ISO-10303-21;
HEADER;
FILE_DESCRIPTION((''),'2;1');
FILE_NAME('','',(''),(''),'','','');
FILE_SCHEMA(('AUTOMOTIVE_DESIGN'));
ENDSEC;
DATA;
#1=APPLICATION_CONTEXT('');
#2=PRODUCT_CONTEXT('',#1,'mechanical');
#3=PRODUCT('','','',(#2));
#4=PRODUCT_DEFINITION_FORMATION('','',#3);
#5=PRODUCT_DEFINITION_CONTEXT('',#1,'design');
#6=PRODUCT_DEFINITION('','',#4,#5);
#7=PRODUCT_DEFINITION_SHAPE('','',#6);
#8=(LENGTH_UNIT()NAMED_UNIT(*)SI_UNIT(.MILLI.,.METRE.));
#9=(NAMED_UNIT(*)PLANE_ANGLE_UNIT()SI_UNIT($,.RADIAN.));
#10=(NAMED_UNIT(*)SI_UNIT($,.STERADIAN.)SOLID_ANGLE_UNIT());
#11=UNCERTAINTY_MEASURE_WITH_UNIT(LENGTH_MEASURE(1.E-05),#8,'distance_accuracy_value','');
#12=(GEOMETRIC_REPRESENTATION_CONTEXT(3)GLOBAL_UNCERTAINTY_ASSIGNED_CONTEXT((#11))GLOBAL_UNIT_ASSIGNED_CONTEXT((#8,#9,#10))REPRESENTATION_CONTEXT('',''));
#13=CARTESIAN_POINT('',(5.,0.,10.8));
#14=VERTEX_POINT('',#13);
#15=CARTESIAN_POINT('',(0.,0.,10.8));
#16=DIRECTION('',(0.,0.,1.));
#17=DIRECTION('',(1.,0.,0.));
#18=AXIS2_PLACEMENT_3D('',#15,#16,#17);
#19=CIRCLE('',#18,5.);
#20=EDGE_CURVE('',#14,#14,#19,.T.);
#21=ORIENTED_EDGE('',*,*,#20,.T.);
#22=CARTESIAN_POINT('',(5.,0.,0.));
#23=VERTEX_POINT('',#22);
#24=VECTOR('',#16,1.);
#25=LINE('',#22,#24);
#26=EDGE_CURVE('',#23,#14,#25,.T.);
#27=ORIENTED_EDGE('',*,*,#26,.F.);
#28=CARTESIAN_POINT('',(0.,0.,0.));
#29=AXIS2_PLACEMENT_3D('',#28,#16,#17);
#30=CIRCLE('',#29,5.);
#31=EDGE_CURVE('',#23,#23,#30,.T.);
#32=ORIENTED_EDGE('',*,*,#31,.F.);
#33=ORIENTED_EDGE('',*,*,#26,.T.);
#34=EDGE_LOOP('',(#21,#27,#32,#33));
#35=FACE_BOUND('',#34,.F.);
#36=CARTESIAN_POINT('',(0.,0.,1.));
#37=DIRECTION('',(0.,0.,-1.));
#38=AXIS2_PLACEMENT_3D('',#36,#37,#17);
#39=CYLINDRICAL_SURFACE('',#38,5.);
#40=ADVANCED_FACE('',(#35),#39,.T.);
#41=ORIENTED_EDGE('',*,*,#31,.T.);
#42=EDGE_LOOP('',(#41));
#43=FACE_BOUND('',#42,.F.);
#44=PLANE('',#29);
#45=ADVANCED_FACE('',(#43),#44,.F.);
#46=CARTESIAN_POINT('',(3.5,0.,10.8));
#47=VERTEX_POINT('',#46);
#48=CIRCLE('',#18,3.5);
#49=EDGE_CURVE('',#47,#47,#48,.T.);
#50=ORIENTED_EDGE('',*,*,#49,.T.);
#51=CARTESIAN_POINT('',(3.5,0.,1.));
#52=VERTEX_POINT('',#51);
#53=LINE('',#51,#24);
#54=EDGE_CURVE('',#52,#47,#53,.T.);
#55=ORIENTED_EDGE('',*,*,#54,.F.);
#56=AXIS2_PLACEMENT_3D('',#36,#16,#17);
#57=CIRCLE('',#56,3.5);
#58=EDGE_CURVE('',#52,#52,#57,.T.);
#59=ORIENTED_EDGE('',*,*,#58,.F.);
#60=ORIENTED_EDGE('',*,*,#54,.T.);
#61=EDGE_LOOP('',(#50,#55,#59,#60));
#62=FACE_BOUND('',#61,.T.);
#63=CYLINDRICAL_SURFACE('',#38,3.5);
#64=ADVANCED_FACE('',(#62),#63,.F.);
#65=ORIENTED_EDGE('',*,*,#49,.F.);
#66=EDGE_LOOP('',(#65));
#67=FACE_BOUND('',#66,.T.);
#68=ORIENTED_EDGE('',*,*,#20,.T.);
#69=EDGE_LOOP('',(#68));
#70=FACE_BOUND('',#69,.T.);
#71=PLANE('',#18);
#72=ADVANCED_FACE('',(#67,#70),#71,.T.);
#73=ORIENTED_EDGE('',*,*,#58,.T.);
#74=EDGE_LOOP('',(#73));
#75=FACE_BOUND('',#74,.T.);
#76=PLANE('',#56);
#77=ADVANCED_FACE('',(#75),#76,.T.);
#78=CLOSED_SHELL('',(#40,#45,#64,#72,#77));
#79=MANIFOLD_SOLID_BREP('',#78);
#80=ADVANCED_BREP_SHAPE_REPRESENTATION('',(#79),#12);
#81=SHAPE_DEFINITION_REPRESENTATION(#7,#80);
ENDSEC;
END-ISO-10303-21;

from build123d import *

# Parameters (mm, degrees)
F0_R     = 5
F1_DEPTH = 1
F2_R     = 5
F2_R_2   = 3.5
F3_DEPTH = 9.8


# Not quite as in the source:
# - the program builds the solid bodies; features that only make, move or delete a surface that nothing else refers to are left out


with BuildPart() as f1:
    # F0 (on Top) → F1 (new body)
    with BuildSketch(Plane.XY):
        Circle(F0_R)
    extrude(amount=F1_DEPTH)

    # F2 (on face) → F3 (join)
    with BuildSketch(Plane.XY.offset(1)):
        Circle(F2_R)
        Circle(F2_R_2, mode=Mode.SUBTRACT)
    extrude(amount=F3_DEPTH)


solid = f1.part
